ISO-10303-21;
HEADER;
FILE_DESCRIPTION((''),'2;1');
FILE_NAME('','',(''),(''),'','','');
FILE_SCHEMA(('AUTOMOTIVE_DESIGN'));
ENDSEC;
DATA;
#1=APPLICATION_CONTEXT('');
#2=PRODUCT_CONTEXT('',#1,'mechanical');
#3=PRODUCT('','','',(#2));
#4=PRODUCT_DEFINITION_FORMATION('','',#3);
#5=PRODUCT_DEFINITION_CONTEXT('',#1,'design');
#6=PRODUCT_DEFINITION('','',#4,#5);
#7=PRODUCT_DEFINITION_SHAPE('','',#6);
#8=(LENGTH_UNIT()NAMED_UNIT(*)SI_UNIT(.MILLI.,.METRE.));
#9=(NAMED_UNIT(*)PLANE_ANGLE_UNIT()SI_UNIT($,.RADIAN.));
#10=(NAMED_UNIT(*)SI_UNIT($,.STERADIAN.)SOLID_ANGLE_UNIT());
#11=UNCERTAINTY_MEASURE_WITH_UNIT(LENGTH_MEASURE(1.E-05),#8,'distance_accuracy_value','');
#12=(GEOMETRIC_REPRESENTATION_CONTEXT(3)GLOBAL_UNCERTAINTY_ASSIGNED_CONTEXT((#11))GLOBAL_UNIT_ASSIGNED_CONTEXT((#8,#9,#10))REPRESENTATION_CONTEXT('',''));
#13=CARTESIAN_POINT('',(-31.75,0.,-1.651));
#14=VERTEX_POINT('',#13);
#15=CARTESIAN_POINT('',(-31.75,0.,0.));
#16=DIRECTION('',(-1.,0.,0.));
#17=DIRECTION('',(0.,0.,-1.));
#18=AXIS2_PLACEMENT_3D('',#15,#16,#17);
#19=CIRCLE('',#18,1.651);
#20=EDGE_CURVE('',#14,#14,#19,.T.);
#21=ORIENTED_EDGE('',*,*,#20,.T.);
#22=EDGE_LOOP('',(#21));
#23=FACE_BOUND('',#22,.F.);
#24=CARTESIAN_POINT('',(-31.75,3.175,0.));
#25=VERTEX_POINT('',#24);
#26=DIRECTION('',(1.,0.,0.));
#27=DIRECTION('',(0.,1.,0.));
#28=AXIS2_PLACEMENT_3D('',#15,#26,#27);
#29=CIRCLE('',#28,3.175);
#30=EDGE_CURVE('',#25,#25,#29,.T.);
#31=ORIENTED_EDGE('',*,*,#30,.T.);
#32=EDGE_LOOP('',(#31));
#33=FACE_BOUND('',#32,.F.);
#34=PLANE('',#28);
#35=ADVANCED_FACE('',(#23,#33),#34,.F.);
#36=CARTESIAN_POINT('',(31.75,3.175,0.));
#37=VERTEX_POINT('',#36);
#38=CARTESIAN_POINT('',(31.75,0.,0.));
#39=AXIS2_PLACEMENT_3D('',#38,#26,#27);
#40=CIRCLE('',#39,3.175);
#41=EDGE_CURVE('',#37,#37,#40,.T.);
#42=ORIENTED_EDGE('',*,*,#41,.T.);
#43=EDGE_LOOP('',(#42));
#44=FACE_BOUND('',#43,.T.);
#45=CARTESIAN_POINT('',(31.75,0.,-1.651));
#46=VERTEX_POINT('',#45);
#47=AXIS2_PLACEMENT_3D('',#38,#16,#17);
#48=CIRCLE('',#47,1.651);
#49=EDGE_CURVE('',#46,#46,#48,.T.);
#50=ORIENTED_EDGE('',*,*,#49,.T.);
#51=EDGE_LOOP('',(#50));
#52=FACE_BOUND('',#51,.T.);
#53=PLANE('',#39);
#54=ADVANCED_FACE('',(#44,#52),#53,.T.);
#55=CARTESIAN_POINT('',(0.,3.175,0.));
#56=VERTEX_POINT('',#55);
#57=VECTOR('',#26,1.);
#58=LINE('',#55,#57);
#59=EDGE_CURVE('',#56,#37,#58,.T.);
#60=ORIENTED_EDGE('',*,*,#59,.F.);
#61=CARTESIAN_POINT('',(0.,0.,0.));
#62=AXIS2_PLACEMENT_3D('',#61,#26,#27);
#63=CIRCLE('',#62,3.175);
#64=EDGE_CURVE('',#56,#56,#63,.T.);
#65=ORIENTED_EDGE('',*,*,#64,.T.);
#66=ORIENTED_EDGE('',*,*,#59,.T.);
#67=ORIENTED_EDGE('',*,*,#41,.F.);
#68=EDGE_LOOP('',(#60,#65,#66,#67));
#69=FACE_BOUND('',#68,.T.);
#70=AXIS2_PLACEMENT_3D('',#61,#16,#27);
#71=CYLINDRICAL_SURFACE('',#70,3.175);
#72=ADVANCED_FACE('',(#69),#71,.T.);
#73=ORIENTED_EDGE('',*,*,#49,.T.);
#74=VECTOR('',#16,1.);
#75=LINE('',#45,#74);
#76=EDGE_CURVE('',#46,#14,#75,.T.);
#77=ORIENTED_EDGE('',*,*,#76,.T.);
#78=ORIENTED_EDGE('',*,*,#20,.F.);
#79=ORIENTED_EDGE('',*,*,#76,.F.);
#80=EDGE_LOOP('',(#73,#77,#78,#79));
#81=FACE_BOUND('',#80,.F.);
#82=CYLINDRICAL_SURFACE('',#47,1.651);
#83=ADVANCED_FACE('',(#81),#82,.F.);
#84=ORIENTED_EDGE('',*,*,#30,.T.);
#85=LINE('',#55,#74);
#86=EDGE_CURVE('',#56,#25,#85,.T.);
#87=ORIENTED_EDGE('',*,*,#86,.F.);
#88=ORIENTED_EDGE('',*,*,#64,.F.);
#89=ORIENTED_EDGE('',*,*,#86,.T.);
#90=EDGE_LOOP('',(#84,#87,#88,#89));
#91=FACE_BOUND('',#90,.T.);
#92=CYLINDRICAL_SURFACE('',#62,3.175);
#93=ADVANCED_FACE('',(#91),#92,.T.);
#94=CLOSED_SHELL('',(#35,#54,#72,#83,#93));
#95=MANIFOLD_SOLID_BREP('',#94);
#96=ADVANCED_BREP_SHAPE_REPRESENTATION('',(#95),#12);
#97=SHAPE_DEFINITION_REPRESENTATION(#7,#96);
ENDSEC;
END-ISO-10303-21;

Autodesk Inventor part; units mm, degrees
ref_plane "YZ Plane" through (0, 0, 0) normal (1, 0, 0) x (0, 1, 0)
ref_plane "XZ Plane" through (0, 0, 0) normal (0, 1, 0) x (-1, 0, 0)
ref_plane "XY Plane" through (0, 0, 0) normal (0, 0, 1) x (1, 0, 0)
sketch "Sketch1" plane through (0, 0, 0) normal (1, 0, 0) x (0, 1, 0)
  circle A0 centre (0, 0) radius 3.175
  dimension "d0" = 6.35
extrude "Extrusion1" add sketch "Sketch1" along normal mid plane 63.5
sketch "Sketch2" plane through (31.75, 0, 0) normal (1, 0, 0) x (0, 0, -1)
  circle A0 centre (0, 0) radius 3.175 projected
hole "Hole1" at (31.75, 0, 0) direction (-1, 0, 0) diameter 3.302 end through all thread size "8-32 UNC" class "2B" standard "ANSI Unified Screw Threads"
properties part number "EL2-GB-008" material "Aluminum 6061"
